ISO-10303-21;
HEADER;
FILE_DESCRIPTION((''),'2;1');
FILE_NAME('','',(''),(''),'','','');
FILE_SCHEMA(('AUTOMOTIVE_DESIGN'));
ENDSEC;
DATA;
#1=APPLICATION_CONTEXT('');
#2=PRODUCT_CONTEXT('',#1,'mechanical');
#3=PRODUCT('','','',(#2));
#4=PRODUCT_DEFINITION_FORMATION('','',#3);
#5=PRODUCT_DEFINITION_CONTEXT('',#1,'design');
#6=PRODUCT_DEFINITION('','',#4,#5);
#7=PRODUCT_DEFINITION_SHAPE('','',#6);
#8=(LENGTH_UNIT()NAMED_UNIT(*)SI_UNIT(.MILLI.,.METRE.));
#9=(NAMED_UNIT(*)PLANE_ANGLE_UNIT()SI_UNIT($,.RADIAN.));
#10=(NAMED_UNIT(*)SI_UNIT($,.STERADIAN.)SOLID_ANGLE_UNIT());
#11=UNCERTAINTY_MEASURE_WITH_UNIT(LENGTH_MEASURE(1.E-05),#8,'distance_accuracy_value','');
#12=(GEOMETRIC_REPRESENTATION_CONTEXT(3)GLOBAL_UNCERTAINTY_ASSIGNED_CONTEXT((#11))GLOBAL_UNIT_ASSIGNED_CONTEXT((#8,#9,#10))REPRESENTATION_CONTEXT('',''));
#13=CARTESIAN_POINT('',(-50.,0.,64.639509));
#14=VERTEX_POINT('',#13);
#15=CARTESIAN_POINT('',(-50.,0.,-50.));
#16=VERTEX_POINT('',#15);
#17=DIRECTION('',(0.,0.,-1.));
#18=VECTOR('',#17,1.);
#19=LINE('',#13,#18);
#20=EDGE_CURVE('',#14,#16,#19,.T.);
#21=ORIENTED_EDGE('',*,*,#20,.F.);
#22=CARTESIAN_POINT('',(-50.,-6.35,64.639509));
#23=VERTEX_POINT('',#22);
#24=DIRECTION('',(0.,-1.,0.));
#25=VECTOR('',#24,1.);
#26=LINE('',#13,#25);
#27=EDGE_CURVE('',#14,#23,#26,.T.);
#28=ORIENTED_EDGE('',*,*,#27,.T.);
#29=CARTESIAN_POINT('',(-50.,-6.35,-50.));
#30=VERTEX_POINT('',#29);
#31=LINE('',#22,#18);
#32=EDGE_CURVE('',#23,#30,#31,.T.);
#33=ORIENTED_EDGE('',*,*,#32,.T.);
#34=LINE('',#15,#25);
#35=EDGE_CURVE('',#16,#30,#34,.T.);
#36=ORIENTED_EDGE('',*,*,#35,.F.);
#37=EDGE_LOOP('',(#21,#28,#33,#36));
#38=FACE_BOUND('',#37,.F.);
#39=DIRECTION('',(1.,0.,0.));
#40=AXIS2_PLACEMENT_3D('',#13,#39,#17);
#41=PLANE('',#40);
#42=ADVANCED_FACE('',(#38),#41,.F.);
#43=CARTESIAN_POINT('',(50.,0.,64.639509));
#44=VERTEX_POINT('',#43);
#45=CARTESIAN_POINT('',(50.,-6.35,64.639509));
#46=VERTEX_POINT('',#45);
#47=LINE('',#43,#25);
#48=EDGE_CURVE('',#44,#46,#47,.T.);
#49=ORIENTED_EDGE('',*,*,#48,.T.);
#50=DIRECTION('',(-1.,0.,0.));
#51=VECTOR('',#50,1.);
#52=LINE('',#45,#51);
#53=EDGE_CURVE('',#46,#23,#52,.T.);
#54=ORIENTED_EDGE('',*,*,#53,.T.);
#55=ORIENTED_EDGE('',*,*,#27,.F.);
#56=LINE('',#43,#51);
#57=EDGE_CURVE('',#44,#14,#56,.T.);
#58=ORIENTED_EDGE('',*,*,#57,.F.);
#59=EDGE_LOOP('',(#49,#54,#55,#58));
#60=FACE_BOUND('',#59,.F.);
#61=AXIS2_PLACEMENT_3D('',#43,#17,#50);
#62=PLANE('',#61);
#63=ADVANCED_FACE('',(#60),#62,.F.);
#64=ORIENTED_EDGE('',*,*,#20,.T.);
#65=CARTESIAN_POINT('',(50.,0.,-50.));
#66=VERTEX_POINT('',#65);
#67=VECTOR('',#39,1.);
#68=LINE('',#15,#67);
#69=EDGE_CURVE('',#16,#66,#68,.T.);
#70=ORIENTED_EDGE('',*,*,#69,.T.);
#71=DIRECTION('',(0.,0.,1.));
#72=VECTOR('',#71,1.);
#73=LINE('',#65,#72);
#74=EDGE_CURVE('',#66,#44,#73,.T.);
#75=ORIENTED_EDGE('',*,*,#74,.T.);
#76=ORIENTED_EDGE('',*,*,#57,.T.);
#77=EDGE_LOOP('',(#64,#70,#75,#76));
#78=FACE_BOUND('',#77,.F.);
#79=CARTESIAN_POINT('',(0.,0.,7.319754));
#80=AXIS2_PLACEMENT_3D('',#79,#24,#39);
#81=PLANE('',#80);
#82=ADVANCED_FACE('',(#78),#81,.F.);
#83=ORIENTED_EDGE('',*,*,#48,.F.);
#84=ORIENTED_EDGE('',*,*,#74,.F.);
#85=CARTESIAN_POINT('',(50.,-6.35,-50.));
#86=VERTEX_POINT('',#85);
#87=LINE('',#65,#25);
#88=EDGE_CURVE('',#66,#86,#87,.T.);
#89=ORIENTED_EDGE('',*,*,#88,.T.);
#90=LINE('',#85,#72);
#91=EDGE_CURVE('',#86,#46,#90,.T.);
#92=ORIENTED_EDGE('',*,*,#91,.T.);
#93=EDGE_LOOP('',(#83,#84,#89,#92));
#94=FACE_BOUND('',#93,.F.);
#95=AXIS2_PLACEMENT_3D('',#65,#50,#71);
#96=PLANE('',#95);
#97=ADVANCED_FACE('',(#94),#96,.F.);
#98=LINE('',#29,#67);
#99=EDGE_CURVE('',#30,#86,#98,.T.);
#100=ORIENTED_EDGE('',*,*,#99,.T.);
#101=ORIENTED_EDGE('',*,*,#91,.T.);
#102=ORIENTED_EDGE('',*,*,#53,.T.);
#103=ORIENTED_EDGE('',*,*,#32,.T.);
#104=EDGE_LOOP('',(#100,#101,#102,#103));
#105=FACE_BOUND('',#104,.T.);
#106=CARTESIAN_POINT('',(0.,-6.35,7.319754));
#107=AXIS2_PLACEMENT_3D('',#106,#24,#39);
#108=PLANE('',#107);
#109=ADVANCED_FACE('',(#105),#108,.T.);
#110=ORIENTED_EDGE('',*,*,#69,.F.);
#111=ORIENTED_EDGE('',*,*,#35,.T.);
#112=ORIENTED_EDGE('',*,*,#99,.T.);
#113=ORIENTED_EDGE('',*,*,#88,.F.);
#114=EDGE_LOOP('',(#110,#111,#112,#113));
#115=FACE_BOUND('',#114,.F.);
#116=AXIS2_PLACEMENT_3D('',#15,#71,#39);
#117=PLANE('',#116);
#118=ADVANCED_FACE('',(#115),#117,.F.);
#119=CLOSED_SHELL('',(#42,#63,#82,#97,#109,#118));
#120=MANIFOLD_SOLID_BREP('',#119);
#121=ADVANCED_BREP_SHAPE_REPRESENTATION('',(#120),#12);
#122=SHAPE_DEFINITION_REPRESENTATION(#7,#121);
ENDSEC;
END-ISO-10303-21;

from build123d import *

# Parameters (mm, degrees)
F1_DEPTH = 6.35


# Not quite as in the source:
# - a feature names something its author has since deleted; it is built from what else it names


with BuildPart() as f1:
    # F0 (on Front) → F1 (new body)
    with BuildSketch(Plane.XZ):
        Polygon((-50, -50), (50, -50), (50, 50), (50, 64.6395087242), (-50, 64.6395087242), (-50, 50), align=None)
    extrude(amount=F1_DEPTH)


solid = f1.part
